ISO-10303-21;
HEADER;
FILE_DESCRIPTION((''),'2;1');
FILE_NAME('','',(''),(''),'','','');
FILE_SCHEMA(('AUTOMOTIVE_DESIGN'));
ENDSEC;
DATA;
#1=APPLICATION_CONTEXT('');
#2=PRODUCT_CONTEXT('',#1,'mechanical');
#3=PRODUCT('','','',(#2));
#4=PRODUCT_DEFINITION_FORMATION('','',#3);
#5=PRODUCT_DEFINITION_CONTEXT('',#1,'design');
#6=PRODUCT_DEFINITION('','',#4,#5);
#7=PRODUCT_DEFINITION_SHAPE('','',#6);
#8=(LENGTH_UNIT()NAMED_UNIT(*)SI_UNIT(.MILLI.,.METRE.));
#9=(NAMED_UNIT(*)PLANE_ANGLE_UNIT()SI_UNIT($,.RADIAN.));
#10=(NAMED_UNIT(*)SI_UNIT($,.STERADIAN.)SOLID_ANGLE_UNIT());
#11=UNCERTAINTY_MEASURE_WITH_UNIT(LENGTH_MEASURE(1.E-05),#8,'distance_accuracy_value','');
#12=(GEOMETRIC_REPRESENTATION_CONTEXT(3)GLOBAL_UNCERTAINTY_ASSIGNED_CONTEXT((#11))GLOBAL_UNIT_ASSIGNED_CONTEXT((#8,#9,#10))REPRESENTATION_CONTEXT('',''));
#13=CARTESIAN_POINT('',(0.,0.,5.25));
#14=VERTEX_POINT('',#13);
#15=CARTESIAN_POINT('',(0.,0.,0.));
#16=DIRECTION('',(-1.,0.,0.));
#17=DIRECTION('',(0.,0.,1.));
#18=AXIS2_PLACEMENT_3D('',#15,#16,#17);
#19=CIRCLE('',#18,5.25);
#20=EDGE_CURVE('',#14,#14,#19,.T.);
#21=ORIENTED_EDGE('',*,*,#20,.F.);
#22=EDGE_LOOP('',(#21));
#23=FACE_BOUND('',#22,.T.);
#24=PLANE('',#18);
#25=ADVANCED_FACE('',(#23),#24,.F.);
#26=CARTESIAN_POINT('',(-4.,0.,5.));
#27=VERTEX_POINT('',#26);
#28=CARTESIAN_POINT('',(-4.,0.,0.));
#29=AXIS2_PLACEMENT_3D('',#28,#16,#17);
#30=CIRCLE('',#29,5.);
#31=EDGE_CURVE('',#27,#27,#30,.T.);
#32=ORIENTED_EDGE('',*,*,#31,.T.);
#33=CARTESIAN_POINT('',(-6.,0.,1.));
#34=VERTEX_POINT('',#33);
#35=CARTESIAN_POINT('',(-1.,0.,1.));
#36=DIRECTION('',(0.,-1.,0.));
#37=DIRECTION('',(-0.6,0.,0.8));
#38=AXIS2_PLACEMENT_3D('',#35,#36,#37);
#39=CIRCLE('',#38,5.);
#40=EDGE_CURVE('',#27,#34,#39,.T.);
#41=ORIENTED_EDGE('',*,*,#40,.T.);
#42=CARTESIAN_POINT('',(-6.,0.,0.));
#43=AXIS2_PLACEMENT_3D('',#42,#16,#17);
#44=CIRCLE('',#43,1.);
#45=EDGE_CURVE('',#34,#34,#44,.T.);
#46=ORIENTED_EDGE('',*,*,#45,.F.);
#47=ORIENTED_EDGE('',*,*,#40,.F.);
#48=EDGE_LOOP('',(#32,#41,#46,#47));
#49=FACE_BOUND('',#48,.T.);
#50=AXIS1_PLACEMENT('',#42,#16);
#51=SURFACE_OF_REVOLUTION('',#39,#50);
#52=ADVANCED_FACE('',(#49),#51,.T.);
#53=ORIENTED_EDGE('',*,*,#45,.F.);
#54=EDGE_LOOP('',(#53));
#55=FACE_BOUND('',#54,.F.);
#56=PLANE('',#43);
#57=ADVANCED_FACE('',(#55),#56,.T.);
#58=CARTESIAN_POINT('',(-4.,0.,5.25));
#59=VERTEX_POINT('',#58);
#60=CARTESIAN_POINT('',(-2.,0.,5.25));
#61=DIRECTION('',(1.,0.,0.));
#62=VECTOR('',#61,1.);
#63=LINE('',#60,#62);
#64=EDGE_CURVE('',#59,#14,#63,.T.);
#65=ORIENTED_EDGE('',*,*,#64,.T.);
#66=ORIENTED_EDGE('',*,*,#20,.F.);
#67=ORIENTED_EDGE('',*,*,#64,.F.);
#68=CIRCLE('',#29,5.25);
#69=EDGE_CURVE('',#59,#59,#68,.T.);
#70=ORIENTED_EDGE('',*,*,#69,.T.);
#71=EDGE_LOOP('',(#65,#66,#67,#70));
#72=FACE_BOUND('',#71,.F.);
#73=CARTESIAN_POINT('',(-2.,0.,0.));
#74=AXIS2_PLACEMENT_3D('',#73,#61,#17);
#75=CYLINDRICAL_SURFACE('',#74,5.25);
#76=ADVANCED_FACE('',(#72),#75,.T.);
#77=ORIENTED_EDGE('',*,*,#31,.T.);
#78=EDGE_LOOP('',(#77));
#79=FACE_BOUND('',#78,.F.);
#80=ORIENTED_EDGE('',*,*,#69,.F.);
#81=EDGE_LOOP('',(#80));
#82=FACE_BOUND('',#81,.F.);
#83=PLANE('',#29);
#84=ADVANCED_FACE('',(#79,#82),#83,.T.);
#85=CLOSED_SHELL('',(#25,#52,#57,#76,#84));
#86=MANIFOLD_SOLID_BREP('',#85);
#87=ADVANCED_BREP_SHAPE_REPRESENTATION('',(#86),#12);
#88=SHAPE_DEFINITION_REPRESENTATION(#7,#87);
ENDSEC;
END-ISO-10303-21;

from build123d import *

# Parameters (mm, degrees)
F0_W   = 4
F0_H   = 5
F0_W_2 = 2
F0_H_2 = 0.25


# Not quite as in the source:
# - a fillet or chamfer that OpenCascade refuses, or shapes differently, is made with other operations: its cross-section is extruded or revolved along the edge and cut away or added


with BuildPart() as f1:
    # F0 (on Front) → F1 (revolve)
    with BuildSketch(Plane.XZ):
        with Locations((-2, 2.5)):
            Rectangle(F0_W, F0_H)
        with Locations((-5, 2.5)):
            Rectangle(F0_W_2, F0_H)
        with Locations((-2, 5.125)):
            Rectangle(F0_W, F0_H_2)
    revolve(axis=Axis((-3, 0, 0), (-1, 0, 0)))

    # F2: fillet of radius 5 on 1 edges, made by hand

    # F2_s1 → F2_t2 (revolve, cut)
    with BuildSketch(Plane.XZ):
        with BuildLine():
            ThreePointArc((-4, 5), (-5.472135955, 3.2360679775), (-6, 1))
            Line((-6, 1), (-6, 5))
            Line((-6, 5), (-4, 5))
        make_face()
    revolve(axis=Axis((-6, 0, 0), (-1, 0, 0)), mode=Mode.SUBTRACT)


solid = f1.part
